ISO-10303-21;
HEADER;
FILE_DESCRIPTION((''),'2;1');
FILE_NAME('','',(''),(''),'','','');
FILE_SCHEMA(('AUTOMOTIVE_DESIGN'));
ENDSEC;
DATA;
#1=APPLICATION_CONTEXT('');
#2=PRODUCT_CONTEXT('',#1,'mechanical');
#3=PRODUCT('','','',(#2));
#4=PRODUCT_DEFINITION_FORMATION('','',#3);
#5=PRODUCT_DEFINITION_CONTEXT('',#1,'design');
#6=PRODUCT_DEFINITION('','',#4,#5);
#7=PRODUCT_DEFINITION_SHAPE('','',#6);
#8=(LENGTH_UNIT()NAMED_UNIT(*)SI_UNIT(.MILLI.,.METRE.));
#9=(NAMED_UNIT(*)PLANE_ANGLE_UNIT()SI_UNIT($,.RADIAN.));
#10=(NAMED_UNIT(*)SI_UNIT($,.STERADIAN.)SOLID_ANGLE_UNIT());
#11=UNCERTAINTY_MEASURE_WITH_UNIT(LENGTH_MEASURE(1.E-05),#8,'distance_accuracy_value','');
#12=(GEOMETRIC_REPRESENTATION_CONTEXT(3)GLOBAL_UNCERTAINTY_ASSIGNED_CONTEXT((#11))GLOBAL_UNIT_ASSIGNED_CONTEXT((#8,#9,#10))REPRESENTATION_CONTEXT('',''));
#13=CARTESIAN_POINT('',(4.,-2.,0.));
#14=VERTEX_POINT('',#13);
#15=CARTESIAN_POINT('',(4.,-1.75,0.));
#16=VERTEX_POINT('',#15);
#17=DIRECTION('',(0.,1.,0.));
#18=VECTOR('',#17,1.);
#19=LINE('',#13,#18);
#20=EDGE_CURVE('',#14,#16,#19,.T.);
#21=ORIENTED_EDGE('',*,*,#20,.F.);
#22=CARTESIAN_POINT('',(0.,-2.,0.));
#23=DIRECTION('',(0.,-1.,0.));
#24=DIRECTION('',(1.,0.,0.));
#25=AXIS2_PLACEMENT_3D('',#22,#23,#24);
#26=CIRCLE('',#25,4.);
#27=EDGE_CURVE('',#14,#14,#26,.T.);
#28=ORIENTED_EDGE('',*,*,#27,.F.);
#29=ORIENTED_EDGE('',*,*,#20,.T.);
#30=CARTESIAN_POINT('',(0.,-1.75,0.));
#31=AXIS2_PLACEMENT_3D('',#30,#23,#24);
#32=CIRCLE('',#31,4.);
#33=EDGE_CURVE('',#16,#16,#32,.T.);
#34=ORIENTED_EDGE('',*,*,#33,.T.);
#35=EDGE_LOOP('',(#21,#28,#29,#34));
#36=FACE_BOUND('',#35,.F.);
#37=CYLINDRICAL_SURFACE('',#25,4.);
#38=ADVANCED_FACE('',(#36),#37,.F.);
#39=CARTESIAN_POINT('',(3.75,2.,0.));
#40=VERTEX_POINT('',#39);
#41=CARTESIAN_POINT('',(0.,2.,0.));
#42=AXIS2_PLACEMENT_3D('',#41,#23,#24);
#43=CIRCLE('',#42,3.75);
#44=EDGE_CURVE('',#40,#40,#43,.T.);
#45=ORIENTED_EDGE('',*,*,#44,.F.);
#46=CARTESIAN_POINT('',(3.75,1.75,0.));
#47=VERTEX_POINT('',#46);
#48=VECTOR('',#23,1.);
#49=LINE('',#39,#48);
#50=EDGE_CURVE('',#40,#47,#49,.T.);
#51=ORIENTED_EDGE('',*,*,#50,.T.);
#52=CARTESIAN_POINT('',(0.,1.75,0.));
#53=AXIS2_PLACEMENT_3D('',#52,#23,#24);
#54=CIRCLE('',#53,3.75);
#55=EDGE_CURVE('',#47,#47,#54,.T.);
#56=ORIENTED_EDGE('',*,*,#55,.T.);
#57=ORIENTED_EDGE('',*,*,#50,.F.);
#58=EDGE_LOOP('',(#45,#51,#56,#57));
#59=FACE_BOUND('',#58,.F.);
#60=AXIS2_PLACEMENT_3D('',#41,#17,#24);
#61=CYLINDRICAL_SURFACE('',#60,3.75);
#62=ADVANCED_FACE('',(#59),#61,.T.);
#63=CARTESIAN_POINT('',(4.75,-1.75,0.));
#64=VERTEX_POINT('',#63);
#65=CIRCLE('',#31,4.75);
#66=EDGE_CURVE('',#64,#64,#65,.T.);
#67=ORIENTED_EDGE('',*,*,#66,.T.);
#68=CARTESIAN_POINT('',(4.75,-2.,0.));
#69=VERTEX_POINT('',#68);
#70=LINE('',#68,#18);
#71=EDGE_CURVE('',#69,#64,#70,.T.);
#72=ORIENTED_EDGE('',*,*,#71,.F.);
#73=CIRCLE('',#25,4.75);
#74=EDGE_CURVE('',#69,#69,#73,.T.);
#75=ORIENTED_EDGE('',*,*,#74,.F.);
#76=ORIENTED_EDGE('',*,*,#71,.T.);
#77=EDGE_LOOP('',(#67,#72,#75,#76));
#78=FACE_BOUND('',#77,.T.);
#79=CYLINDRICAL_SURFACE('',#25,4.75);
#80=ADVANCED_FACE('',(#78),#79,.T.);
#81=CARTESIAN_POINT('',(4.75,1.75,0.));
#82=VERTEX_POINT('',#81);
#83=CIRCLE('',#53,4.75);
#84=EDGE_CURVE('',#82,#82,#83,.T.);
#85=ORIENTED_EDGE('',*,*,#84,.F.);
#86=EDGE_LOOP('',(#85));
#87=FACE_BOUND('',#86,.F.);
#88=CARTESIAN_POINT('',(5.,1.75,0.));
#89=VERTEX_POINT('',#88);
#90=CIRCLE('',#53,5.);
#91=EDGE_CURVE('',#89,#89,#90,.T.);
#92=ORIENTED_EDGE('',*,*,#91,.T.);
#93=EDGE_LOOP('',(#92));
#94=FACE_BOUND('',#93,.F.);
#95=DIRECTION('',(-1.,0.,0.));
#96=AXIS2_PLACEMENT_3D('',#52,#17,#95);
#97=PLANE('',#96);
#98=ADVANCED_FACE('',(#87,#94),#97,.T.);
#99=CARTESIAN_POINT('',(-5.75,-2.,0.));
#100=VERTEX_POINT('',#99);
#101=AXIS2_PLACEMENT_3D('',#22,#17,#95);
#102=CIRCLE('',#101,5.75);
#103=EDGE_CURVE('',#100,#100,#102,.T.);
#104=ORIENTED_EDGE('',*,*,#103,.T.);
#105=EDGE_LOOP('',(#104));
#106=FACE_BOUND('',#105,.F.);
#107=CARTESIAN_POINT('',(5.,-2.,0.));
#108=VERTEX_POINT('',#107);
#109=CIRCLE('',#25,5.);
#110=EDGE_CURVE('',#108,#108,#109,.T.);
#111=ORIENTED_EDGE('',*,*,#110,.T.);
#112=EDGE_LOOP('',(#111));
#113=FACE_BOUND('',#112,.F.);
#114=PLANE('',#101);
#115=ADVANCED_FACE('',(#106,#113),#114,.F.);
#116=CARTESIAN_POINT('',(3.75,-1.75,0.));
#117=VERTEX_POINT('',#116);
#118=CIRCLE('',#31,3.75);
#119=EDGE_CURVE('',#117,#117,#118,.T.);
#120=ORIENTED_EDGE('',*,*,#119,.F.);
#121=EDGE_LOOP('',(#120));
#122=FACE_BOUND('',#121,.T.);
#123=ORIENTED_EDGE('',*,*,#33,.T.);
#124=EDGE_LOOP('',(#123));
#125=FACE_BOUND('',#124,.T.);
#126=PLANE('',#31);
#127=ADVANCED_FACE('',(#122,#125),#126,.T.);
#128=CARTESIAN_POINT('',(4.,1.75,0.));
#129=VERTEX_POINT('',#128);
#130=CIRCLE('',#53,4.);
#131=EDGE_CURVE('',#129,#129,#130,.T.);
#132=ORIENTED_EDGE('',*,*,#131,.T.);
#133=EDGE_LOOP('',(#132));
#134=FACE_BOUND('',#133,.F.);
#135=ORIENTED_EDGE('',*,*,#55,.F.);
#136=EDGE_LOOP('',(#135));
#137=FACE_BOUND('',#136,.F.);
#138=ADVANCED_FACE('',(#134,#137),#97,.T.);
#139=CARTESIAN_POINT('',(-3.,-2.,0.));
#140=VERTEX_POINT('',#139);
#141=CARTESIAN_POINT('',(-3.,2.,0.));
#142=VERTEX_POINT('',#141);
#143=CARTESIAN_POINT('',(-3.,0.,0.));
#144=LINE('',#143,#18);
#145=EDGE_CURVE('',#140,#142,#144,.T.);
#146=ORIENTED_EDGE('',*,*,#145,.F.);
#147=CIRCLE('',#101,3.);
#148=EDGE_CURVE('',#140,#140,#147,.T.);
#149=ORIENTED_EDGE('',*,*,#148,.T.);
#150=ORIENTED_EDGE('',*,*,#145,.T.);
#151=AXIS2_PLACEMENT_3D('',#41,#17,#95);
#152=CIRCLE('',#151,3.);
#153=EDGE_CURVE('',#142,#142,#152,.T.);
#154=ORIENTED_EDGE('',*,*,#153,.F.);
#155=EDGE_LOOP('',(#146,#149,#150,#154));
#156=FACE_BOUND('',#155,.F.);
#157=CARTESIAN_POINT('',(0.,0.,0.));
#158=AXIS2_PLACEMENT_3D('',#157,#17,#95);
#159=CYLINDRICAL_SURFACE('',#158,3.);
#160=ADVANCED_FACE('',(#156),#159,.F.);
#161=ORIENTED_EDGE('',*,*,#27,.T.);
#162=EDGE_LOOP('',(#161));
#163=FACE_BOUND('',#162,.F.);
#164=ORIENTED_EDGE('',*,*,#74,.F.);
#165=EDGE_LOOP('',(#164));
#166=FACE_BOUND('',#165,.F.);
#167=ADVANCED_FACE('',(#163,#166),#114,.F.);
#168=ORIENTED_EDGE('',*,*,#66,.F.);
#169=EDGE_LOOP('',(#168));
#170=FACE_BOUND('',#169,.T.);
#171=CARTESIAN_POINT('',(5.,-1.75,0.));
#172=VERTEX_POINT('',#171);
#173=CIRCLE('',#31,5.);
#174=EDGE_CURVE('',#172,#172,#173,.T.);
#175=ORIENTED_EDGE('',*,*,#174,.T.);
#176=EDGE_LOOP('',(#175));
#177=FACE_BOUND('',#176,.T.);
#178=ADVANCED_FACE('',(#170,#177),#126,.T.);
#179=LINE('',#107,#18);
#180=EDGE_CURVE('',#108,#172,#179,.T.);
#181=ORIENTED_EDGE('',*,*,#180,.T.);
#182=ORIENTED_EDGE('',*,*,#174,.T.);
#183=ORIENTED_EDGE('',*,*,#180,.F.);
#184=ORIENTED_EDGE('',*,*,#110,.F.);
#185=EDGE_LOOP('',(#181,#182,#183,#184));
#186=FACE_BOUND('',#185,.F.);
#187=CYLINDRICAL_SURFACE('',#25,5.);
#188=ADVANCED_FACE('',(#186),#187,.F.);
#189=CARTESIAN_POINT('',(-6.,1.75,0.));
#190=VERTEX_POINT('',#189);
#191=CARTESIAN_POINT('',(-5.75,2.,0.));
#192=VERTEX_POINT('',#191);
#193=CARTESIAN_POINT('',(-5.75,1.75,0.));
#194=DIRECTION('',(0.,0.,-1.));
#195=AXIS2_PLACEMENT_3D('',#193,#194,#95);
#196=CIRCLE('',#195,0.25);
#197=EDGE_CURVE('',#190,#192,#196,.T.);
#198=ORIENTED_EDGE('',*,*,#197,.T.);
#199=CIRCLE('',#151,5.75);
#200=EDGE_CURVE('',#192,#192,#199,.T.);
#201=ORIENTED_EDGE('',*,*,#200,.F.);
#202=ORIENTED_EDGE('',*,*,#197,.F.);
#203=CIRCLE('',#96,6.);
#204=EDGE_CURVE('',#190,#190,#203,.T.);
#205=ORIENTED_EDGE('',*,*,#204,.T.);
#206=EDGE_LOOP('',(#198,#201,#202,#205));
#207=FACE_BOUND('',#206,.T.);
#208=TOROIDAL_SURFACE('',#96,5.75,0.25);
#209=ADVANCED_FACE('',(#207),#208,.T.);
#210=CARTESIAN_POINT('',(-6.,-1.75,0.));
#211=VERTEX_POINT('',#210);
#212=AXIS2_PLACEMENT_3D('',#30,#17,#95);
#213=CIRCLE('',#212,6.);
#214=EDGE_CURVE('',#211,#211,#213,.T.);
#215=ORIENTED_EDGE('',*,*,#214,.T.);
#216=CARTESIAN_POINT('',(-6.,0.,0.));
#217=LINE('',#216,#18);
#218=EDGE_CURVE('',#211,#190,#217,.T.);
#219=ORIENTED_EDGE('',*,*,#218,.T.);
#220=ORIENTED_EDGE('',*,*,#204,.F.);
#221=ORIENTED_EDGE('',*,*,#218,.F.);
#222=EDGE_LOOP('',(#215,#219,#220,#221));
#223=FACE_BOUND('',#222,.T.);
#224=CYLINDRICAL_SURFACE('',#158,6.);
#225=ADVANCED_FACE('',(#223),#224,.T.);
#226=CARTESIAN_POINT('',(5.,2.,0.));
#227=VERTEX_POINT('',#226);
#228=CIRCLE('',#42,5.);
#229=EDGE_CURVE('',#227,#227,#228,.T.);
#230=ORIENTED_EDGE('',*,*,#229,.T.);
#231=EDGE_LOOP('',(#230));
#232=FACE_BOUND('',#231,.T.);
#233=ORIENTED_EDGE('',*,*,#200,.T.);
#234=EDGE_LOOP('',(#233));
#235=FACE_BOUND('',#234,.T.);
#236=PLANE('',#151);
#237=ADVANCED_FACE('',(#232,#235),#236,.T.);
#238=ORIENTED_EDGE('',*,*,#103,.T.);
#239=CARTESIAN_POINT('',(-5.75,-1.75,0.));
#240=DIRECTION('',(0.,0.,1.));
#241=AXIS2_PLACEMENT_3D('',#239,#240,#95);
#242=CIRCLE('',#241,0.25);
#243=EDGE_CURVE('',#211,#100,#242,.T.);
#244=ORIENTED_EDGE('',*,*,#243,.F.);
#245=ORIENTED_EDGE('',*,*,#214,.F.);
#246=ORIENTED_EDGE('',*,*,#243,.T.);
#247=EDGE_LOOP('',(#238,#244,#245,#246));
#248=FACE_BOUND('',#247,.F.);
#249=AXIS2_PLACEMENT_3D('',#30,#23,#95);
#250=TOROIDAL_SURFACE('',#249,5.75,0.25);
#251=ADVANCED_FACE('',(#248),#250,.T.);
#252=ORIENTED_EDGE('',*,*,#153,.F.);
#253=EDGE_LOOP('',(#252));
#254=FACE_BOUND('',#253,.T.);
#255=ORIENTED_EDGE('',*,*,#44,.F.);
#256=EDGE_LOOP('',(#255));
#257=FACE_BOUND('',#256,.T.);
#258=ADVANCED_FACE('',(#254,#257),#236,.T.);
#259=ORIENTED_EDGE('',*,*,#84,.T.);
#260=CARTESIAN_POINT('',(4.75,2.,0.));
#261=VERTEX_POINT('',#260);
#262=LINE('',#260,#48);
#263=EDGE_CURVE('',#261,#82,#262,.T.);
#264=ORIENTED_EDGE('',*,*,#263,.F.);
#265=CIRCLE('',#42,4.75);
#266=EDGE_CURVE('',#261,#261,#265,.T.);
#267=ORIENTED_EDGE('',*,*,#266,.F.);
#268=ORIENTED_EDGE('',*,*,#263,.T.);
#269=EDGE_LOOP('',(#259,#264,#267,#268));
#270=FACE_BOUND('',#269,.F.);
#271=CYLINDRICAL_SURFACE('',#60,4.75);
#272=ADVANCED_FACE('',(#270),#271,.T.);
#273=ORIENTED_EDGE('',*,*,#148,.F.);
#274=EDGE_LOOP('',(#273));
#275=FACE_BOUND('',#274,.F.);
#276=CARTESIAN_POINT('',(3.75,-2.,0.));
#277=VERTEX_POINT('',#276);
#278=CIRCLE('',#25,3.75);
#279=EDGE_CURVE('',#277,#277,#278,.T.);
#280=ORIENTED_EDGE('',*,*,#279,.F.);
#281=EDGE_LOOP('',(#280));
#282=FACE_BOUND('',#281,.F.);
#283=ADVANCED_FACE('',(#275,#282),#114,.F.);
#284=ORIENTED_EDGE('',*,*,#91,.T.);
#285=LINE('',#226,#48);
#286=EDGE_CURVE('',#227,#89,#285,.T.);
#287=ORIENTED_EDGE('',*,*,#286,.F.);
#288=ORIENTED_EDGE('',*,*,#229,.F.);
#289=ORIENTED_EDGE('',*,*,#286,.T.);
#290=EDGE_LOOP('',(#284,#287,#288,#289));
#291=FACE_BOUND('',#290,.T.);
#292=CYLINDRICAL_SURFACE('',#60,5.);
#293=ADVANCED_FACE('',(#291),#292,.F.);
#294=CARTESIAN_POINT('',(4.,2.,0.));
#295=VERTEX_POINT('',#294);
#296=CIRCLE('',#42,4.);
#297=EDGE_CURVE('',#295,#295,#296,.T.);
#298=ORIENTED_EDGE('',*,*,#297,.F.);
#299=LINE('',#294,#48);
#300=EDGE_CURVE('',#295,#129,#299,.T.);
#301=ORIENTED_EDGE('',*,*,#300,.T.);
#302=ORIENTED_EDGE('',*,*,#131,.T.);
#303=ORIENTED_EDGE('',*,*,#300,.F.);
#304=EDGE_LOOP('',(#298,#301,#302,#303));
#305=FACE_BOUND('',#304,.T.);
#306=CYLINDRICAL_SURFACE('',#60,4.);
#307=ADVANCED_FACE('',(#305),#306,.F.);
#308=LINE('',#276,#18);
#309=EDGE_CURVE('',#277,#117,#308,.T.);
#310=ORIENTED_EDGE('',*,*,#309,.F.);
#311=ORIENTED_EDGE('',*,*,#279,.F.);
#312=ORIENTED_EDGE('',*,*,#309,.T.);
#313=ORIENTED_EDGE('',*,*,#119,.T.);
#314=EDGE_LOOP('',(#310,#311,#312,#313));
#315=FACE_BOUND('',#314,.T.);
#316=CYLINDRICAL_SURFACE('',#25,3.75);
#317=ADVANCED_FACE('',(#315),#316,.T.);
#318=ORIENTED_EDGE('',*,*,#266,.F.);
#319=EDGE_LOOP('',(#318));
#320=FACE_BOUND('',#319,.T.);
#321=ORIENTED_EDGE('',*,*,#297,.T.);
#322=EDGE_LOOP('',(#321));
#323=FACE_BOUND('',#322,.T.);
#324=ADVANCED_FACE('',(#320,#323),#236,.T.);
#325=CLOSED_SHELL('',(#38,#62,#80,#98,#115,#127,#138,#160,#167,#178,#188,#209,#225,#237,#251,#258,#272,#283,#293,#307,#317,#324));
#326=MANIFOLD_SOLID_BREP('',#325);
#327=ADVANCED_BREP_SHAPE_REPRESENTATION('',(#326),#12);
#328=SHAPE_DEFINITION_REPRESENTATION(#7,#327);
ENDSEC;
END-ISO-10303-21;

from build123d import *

# Parameters (mm, degrees)
F0_W     = 3
F0_H     = 4
F2_R     = 5
F2_R_2   = 4.75
F2_R_3   = 4
F2_R_4   = 3.75
F3_DEPTH = 0.25
F4_R     = 0.25


# Not quite as in the source:
# - a pattern or mirror of a feature is missing from the dataset's text; its kind, count and spacing are read off the source's solid


with BuildPart() as f1:
    # F0 (on Top) → F1 (revolve)
    with BuildSketch(Plane.XY):
        with Locations((-4.5, 0)):
            Rectangle(F0_W, F0_H)
    revolve(axis=Axis((0, 8.2013355568, 0), (0, 1, 0)))

    # F2 (on face) → F3 (cut)
    with BuildSketch(Plane.XZ.offset(2)):
        Circle(F2_R)
        Circle(F2_R_2, mode=Mode.SUBTRACT)
        Circle(F2_R_3)
        Circle(F2_R_4, mode=Mode.SUBTRACT)
    f3 = extrude(amount=-F3_DEPTH, mode=Mode.SUBTRACT)

    # F3_copies: F3 across plane
    add(f3.mirror(Plane.ZX), mode=Mode.SUBTRACT)

    # F4
    f4_edges = [f1.edges().sort_by_distance(p)[0] for p in [
        (6, -2, 0),
        (6, 2, 0),
    ]]
    fillet(f4_edges, radius=F4_R)


solid = f1.part
